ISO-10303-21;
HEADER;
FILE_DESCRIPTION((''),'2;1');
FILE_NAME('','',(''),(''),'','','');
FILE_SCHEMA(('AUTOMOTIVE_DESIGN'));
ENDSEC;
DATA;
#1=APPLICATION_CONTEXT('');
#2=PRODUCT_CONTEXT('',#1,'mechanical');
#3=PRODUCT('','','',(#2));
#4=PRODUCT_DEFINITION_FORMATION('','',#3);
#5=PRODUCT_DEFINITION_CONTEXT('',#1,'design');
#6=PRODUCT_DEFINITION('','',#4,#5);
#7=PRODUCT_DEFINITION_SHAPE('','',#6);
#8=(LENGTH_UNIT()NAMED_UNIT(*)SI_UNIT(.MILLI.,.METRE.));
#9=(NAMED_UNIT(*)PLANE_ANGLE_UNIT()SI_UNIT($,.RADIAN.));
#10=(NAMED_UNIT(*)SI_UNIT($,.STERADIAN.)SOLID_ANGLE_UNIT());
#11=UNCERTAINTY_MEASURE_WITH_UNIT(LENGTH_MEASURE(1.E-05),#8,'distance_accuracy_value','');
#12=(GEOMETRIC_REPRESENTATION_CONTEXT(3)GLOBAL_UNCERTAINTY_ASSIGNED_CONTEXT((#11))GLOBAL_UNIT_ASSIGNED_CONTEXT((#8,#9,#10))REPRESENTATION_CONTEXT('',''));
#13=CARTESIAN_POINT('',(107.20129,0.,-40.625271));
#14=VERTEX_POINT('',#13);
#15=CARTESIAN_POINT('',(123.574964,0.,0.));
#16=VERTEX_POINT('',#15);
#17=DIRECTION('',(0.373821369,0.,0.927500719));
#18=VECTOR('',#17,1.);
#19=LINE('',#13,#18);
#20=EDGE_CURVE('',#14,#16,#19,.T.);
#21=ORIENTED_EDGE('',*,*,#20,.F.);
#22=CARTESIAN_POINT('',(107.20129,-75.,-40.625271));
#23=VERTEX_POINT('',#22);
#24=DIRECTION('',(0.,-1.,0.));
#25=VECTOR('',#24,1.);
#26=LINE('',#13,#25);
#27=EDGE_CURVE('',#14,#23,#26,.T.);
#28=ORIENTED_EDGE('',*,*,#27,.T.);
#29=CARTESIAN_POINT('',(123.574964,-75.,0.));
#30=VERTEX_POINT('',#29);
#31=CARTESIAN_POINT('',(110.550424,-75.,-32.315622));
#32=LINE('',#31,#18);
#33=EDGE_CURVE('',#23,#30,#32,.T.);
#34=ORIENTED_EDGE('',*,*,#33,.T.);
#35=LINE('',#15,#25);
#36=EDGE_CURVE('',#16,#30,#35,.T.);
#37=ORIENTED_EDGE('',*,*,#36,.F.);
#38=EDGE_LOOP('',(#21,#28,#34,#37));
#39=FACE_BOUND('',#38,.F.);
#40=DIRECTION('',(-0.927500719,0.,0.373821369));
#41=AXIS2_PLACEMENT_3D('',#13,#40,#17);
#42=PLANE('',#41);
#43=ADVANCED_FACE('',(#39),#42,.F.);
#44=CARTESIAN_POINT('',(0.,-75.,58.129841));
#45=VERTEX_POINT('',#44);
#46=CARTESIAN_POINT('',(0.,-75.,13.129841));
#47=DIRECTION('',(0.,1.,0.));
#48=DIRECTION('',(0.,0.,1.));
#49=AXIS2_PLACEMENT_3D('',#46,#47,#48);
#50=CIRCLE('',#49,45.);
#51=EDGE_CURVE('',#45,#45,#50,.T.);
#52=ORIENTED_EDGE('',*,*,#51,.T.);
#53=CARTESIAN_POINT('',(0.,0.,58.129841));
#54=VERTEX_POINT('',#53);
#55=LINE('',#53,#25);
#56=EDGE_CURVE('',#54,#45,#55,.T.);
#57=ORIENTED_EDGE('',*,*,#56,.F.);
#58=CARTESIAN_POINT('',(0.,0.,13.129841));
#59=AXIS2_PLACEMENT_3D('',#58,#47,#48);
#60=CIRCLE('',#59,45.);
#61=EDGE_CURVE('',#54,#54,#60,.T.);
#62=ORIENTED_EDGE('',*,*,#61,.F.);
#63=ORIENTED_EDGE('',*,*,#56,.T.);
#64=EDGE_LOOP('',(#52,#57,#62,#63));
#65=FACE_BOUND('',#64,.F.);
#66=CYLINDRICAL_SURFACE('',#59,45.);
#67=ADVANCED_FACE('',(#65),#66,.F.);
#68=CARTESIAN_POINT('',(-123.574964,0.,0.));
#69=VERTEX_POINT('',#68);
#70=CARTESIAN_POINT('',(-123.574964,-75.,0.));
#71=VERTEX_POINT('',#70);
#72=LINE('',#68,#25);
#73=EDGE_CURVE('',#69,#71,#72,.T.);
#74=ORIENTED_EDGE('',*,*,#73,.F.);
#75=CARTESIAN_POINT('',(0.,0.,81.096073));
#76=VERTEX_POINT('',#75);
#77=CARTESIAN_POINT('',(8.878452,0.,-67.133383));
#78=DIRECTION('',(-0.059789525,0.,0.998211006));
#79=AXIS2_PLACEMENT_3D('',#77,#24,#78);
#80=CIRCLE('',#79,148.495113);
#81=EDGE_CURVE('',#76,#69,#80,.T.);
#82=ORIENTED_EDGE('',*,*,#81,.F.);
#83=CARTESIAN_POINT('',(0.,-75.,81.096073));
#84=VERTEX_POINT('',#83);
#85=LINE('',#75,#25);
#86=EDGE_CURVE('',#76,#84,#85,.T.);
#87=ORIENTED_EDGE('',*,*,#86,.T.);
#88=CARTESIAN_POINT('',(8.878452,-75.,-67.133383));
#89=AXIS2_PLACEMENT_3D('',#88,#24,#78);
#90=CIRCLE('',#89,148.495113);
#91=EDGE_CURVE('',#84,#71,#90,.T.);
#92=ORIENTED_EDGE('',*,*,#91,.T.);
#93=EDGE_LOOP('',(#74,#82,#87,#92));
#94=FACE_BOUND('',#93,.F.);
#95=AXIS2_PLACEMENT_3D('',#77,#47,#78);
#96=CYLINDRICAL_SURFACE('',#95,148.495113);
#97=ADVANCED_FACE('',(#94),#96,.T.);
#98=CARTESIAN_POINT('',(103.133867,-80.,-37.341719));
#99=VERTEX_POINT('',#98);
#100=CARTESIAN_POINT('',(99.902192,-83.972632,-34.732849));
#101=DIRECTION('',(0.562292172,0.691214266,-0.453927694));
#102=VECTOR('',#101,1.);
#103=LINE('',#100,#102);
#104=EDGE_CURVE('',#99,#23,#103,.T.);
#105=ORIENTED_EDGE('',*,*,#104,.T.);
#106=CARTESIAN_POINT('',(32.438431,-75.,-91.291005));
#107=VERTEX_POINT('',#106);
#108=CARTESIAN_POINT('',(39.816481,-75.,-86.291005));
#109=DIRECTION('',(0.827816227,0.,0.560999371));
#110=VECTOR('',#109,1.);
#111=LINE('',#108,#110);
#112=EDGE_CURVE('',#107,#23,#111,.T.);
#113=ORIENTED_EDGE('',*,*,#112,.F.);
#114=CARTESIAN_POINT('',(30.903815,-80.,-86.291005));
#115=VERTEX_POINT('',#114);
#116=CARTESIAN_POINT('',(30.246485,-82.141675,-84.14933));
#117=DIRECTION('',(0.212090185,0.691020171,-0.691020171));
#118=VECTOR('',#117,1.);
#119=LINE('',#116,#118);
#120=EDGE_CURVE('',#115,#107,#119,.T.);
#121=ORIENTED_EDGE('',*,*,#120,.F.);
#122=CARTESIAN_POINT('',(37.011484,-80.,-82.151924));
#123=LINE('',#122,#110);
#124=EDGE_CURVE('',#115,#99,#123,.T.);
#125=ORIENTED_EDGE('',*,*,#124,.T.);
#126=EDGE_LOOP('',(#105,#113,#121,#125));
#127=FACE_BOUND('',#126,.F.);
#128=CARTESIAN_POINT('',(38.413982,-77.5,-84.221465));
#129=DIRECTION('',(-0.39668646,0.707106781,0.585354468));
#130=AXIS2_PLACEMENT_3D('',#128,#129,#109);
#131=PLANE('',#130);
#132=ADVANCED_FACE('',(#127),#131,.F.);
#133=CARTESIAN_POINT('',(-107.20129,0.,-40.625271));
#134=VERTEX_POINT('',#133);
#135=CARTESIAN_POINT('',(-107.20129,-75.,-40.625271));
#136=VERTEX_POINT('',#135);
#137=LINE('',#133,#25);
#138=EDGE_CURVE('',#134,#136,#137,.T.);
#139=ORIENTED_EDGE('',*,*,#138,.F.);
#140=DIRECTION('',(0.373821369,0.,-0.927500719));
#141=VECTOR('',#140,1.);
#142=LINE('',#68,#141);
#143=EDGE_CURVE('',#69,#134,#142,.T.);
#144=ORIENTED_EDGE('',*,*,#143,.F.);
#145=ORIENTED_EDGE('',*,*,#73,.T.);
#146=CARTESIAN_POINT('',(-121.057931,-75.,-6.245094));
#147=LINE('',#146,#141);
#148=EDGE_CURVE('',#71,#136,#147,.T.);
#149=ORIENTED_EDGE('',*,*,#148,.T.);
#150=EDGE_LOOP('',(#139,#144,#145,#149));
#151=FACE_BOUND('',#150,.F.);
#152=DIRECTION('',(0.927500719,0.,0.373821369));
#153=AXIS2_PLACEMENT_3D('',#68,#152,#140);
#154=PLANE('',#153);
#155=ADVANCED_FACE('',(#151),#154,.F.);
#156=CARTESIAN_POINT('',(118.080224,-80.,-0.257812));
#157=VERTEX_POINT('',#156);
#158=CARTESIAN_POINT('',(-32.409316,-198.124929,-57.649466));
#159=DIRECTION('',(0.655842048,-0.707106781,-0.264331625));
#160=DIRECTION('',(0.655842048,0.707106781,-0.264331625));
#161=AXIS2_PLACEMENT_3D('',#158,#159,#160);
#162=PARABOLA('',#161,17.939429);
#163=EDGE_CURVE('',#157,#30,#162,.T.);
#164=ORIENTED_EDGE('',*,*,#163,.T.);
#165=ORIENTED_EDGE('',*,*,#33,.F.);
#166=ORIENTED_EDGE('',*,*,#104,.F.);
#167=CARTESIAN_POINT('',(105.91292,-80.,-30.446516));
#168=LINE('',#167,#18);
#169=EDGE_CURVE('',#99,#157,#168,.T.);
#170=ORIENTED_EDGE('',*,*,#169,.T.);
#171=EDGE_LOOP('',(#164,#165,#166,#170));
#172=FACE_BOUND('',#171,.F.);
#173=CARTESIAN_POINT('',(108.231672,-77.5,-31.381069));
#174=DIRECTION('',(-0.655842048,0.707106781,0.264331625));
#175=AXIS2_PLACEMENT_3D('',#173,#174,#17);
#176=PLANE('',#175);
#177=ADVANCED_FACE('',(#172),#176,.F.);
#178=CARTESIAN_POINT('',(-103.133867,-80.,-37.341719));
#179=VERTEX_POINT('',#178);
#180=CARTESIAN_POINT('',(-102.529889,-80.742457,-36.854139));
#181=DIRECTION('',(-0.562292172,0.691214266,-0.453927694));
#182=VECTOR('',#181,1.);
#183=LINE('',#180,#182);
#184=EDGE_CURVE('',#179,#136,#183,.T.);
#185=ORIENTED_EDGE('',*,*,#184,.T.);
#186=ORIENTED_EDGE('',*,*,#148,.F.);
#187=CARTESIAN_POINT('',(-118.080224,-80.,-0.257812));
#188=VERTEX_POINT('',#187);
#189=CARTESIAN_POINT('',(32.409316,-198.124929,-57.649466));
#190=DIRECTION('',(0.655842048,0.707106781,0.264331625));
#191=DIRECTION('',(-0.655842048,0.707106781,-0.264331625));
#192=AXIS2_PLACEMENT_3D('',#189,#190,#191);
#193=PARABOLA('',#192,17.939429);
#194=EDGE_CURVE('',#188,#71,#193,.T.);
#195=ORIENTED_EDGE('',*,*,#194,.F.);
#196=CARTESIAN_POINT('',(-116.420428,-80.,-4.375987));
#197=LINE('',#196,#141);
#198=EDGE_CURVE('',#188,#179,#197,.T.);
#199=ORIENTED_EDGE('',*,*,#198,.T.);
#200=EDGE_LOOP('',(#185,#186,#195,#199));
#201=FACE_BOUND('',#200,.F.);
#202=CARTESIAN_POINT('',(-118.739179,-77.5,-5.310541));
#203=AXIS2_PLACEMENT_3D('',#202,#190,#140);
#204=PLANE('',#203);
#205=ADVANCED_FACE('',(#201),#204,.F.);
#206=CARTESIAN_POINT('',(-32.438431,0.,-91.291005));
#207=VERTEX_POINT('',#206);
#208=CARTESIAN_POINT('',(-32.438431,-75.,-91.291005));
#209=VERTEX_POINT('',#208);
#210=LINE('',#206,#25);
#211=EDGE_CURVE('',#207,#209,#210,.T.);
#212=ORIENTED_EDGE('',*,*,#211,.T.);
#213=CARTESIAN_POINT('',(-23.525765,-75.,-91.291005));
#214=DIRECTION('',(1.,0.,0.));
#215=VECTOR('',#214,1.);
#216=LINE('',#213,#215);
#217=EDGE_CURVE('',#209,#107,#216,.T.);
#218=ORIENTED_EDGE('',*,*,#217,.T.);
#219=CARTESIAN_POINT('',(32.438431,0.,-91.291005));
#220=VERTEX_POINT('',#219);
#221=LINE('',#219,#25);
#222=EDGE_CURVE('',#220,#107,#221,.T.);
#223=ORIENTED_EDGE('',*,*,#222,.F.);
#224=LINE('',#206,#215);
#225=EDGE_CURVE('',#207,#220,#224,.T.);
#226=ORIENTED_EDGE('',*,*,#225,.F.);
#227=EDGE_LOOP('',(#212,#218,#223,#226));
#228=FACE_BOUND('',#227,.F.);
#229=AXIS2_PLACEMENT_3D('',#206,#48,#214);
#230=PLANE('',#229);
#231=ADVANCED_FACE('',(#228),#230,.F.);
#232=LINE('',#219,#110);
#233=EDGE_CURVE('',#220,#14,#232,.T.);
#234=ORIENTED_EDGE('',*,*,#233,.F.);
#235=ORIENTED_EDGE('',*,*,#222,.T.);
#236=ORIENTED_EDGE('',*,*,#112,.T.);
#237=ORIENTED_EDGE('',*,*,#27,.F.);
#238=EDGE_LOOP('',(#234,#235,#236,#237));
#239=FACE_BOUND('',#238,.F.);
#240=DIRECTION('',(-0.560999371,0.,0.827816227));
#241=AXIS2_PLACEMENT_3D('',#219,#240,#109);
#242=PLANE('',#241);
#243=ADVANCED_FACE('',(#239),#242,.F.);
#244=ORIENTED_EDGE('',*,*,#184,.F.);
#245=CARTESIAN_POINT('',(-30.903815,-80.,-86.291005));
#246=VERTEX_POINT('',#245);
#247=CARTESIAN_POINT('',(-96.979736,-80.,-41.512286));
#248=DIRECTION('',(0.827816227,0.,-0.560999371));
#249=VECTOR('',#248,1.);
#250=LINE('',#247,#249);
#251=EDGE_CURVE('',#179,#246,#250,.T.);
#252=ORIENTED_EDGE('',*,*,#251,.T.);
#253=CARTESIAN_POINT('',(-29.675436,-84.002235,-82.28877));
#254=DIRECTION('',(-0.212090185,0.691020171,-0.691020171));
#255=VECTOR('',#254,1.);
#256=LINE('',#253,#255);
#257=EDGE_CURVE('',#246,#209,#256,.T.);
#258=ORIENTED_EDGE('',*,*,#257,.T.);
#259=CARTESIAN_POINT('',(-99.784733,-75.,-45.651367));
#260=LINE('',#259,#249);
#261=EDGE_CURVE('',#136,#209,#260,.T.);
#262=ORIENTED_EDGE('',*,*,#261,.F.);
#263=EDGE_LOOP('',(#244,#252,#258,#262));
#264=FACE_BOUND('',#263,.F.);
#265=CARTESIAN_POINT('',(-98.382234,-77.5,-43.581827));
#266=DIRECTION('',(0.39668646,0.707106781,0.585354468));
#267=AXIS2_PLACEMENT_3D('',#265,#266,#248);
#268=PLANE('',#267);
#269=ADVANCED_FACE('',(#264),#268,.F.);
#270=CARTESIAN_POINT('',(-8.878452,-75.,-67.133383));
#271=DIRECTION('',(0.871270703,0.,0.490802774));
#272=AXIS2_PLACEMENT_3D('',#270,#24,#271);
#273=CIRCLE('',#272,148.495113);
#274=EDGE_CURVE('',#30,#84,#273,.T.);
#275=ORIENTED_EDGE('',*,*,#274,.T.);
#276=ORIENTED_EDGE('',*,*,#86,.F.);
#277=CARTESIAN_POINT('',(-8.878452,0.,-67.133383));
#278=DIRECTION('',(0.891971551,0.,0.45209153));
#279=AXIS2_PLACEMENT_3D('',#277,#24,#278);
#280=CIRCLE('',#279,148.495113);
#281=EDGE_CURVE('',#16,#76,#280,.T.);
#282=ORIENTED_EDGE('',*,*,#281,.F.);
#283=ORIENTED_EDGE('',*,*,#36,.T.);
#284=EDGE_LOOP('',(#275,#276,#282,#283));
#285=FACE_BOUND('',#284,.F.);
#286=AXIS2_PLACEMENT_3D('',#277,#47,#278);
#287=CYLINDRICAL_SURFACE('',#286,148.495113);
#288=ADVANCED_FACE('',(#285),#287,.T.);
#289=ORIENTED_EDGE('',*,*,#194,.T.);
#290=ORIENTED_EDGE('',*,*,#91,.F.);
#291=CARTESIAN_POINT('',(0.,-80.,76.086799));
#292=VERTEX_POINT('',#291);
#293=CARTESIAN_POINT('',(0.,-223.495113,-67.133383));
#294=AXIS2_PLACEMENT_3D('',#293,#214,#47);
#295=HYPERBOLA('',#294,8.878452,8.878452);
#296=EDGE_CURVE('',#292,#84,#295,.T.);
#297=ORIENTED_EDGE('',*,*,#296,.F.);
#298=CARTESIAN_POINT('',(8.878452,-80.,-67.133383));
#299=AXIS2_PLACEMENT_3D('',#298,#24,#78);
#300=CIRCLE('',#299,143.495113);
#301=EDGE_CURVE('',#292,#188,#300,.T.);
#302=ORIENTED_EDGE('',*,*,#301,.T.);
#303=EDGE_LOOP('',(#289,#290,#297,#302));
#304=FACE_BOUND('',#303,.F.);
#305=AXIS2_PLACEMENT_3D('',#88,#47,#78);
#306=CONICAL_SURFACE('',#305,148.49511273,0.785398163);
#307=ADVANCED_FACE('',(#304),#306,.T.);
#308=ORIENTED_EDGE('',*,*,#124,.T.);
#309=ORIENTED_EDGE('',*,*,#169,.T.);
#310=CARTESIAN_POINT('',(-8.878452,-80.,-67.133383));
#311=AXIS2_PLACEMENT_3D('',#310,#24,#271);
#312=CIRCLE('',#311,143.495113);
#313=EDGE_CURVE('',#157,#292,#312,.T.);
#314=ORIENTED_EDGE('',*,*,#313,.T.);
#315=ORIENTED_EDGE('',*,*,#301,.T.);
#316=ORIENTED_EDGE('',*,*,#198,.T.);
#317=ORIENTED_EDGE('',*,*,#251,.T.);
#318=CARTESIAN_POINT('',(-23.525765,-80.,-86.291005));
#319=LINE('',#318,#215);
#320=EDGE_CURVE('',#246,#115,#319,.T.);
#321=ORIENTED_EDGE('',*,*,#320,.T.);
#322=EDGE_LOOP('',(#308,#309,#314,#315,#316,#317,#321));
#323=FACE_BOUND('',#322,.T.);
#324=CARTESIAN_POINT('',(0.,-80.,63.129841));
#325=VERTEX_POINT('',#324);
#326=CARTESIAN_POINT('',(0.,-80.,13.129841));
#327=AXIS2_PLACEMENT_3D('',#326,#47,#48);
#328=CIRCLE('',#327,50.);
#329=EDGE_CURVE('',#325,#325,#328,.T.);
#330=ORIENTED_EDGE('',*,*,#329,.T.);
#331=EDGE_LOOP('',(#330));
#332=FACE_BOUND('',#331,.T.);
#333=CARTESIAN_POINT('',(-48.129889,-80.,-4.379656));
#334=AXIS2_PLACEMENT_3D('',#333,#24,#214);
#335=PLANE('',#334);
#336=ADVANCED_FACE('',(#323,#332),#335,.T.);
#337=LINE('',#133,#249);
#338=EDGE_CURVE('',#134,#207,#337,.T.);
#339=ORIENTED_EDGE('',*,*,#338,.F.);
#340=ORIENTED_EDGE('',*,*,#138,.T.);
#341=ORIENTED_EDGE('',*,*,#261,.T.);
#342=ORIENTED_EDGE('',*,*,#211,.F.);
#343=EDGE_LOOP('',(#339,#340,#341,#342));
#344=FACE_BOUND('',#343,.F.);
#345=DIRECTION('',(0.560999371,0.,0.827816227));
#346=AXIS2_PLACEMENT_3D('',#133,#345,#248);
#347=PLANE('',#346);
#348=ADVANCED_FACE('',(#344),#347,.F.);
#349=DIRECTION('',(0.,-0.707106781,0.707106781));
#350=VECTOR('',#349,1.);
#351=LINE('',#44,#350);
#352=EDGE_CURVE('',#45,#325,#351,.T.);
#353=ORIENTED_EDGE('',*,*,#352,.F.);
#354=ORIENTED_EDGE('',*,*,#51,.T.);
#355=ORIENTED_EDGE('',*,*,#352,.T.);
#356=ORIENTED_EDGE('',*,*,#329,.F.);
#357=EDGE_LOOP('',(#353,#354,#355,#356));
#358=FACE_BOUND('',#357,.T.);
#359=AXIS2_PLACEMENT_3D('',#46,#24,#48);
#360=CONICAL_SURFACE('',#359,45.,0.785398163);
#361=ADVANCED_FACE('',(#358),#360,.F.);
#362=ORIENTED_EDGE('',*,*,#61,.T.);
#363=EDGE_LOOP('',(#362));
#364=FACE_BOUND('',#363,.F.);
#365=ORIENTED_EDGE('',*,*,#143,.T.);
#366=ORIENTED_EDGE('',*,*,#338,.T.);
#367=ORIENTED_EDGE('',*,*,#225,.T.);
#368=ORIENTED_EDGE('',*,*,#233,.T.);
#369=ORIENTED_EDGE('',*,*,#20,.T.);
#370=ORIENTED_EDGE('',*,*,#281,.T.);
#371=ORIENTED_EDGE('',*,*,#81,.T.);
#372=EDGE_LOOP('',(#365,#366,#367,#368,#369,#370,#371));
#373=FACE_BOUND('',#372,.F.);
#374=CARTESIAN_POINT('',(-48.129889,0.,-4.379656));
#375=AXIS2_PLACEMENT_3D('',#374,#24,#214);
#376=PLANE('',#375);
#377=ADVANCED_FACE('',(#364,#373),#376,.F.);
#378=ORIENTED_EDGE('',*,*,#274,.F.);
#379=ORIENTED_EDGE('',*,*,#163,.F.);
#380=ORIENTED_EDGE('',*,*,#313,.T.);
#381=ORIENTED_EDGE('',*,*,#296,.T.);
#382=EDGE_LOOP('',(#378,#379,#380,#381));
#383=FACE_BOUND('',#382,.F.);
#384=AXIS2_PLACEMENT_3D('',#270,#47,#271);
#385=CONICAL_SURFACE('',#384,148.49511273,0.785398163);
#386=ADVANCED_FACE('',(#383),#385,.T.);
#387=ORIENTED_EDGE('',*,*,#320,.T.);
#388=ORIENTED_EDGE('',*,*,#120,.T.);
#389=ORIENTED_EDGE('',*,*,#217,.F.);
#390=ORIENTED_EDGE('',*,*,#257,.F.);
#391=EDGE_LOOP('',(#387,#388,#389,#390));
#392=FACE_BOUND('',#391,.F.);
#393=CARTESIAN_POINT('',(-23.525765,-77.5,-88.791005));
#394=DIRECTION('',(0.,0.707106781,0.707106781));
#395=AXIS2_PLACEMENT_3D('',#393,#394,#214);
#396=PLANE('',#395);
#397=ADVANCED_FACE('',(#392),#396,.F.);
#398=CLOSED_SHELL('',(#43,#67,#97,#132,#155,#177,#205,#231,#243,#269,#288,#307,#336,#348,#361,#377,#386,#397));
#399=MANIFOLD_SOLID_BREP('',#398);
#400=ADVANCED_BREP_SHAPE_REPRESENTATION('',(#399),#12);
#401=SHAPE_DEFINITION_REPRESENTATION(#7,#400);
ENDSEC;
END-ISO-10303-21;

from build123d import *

# Parameters (mm, degrees)
F1_DEPTH   = 80
F2_C1_SIZE = 5
F2_C2_SIZE = 5
F2_C3_SIZE = 5
F2_C4_SIZE = 5
F2_C5_SIZE = 5
F2_C6_SIZE = 5
F2_C7_SIZE = 5
F2_C8_SIZE = 5


with BuildPart() as f1:
    # F0 (on Front) → F1 (new body)
    with BuildSketch(Plane.XZ):
        with BuildLine():
            Line((0, 58.1298414463), (0, 81.0960731047))
            ThreePointArc((0, 81.0960731047), (-72.594350102, 57.0156445727), (-123.5749638583, 0))
            Line((-123.5749638583, 0), (-107.2012897506, -40.625271212))
            Line((-107.2012897506, -40.625271212), (-32.4384310855, -91.2910051649))
            Line((-32.4384310855, -91.2910051649), (0, -91.2910051649))
            Line((0, -91.2910051649), (0, -31.8701585537))
            ThreePointArc((0, -31.8701585537), (-45, 13.1298414463), (0, 58.1298414463))
        make_face()
        with BuildLine():
            ThreePointArc((123.5749638583, 0), (72.594350102, 57.0156445727), (0, 81.0960731047))
            Line((0, 81.0960731047), (0, 58.1298414463))
            ThreePointArc((0, 58.1298414463), (31.8198051534, 44.9496465997), (45, 13.1298414463))
            ThreePointArc((45, 13.1298414463), (31.8198051534, -18.6899637071), (0, -31.8701585537))
            Line((0, -31.8701585537), (0, -91.2910051649))
            Line((0, -91.2910051649), (32.4384310855, -91.2910051649))
            Line((32.4384310855, -91.2910051649), (107.2012897506, -40.625271212))
            Line((107.2012897506, -40.625271212), (123.5749638583, 0))
        make_face()
    extrude(amount=F1_DEPTH)

    # F2: chamfer of 5 on 8 edges, made by hand

    # F2_c1
    f2_c1_edges = [f1.edges().sort_by_distance(p)[0] for p in [
        (0, -80, -31.8701585537),
    ]]
    chamfer(f2_c1_edges, length=F2_C1_SIZE)

    # F2_c2
    f2_c2_edges = [f1.edges().sort_by_distance(p)[0] for p in [
        (-72.594350102, -80, 57.0156445727),
    ]]
    chamfer(f2_c2_edges, length=F2_C2_SIZE)

    # F2_c3
    f2_c3_edges = [f1.edges().sort_by_distance(p)[0] for p in [
        (-114.129610425, -80, -23.4351827451),
    ]]
    chamfer(f2_c3_edges, length=F2_C3_SIZE)

    # F2_c4
    f2_c4_edges = [f1.edges().sort_by_distance(p)[0] for p in [
        (-66.1115818198, -80, -68.4711862478),
    ]]
    chamfer(f2_c4_edges, length=F2_C4_SIZE)

    # F2_c5
    f2_c5_edges = [f1.edges().sort_by_distance(p)[0] for p in [
        (4.4563329797, -80, -91.2910051649),
    ]]
    chamfer(f2_c5_edges, length=F2_C5_SIZE)

    # F2_c6
    f2_c6_edges = [f1.edges().sort_by_distance(p)[0] for p in [
        (73.5088851707, -80, -63.4581381884),
    ]]
    chamfer(f2_c6_edges, length=F2_C6_SIZE)

    # F2_c7
    f2_c7_edges = [f1.edges().sort_by_distance(p)[0] for p in [
        (117.0626938618, -80, -16.1578111957),
    ]]
    chamfer(f2_c7_edges, length=F2_C7_SIZE)

    # F2_c8
    f2_c8_edges = [f1.edges().sort_by_distance(p)[0] for p in [
        (86.848352424, -80, 46.3883216842),
    ]]
    chamfer(f2_c8_edges, length=F2_C8_SIZE)


solid = f1.part
